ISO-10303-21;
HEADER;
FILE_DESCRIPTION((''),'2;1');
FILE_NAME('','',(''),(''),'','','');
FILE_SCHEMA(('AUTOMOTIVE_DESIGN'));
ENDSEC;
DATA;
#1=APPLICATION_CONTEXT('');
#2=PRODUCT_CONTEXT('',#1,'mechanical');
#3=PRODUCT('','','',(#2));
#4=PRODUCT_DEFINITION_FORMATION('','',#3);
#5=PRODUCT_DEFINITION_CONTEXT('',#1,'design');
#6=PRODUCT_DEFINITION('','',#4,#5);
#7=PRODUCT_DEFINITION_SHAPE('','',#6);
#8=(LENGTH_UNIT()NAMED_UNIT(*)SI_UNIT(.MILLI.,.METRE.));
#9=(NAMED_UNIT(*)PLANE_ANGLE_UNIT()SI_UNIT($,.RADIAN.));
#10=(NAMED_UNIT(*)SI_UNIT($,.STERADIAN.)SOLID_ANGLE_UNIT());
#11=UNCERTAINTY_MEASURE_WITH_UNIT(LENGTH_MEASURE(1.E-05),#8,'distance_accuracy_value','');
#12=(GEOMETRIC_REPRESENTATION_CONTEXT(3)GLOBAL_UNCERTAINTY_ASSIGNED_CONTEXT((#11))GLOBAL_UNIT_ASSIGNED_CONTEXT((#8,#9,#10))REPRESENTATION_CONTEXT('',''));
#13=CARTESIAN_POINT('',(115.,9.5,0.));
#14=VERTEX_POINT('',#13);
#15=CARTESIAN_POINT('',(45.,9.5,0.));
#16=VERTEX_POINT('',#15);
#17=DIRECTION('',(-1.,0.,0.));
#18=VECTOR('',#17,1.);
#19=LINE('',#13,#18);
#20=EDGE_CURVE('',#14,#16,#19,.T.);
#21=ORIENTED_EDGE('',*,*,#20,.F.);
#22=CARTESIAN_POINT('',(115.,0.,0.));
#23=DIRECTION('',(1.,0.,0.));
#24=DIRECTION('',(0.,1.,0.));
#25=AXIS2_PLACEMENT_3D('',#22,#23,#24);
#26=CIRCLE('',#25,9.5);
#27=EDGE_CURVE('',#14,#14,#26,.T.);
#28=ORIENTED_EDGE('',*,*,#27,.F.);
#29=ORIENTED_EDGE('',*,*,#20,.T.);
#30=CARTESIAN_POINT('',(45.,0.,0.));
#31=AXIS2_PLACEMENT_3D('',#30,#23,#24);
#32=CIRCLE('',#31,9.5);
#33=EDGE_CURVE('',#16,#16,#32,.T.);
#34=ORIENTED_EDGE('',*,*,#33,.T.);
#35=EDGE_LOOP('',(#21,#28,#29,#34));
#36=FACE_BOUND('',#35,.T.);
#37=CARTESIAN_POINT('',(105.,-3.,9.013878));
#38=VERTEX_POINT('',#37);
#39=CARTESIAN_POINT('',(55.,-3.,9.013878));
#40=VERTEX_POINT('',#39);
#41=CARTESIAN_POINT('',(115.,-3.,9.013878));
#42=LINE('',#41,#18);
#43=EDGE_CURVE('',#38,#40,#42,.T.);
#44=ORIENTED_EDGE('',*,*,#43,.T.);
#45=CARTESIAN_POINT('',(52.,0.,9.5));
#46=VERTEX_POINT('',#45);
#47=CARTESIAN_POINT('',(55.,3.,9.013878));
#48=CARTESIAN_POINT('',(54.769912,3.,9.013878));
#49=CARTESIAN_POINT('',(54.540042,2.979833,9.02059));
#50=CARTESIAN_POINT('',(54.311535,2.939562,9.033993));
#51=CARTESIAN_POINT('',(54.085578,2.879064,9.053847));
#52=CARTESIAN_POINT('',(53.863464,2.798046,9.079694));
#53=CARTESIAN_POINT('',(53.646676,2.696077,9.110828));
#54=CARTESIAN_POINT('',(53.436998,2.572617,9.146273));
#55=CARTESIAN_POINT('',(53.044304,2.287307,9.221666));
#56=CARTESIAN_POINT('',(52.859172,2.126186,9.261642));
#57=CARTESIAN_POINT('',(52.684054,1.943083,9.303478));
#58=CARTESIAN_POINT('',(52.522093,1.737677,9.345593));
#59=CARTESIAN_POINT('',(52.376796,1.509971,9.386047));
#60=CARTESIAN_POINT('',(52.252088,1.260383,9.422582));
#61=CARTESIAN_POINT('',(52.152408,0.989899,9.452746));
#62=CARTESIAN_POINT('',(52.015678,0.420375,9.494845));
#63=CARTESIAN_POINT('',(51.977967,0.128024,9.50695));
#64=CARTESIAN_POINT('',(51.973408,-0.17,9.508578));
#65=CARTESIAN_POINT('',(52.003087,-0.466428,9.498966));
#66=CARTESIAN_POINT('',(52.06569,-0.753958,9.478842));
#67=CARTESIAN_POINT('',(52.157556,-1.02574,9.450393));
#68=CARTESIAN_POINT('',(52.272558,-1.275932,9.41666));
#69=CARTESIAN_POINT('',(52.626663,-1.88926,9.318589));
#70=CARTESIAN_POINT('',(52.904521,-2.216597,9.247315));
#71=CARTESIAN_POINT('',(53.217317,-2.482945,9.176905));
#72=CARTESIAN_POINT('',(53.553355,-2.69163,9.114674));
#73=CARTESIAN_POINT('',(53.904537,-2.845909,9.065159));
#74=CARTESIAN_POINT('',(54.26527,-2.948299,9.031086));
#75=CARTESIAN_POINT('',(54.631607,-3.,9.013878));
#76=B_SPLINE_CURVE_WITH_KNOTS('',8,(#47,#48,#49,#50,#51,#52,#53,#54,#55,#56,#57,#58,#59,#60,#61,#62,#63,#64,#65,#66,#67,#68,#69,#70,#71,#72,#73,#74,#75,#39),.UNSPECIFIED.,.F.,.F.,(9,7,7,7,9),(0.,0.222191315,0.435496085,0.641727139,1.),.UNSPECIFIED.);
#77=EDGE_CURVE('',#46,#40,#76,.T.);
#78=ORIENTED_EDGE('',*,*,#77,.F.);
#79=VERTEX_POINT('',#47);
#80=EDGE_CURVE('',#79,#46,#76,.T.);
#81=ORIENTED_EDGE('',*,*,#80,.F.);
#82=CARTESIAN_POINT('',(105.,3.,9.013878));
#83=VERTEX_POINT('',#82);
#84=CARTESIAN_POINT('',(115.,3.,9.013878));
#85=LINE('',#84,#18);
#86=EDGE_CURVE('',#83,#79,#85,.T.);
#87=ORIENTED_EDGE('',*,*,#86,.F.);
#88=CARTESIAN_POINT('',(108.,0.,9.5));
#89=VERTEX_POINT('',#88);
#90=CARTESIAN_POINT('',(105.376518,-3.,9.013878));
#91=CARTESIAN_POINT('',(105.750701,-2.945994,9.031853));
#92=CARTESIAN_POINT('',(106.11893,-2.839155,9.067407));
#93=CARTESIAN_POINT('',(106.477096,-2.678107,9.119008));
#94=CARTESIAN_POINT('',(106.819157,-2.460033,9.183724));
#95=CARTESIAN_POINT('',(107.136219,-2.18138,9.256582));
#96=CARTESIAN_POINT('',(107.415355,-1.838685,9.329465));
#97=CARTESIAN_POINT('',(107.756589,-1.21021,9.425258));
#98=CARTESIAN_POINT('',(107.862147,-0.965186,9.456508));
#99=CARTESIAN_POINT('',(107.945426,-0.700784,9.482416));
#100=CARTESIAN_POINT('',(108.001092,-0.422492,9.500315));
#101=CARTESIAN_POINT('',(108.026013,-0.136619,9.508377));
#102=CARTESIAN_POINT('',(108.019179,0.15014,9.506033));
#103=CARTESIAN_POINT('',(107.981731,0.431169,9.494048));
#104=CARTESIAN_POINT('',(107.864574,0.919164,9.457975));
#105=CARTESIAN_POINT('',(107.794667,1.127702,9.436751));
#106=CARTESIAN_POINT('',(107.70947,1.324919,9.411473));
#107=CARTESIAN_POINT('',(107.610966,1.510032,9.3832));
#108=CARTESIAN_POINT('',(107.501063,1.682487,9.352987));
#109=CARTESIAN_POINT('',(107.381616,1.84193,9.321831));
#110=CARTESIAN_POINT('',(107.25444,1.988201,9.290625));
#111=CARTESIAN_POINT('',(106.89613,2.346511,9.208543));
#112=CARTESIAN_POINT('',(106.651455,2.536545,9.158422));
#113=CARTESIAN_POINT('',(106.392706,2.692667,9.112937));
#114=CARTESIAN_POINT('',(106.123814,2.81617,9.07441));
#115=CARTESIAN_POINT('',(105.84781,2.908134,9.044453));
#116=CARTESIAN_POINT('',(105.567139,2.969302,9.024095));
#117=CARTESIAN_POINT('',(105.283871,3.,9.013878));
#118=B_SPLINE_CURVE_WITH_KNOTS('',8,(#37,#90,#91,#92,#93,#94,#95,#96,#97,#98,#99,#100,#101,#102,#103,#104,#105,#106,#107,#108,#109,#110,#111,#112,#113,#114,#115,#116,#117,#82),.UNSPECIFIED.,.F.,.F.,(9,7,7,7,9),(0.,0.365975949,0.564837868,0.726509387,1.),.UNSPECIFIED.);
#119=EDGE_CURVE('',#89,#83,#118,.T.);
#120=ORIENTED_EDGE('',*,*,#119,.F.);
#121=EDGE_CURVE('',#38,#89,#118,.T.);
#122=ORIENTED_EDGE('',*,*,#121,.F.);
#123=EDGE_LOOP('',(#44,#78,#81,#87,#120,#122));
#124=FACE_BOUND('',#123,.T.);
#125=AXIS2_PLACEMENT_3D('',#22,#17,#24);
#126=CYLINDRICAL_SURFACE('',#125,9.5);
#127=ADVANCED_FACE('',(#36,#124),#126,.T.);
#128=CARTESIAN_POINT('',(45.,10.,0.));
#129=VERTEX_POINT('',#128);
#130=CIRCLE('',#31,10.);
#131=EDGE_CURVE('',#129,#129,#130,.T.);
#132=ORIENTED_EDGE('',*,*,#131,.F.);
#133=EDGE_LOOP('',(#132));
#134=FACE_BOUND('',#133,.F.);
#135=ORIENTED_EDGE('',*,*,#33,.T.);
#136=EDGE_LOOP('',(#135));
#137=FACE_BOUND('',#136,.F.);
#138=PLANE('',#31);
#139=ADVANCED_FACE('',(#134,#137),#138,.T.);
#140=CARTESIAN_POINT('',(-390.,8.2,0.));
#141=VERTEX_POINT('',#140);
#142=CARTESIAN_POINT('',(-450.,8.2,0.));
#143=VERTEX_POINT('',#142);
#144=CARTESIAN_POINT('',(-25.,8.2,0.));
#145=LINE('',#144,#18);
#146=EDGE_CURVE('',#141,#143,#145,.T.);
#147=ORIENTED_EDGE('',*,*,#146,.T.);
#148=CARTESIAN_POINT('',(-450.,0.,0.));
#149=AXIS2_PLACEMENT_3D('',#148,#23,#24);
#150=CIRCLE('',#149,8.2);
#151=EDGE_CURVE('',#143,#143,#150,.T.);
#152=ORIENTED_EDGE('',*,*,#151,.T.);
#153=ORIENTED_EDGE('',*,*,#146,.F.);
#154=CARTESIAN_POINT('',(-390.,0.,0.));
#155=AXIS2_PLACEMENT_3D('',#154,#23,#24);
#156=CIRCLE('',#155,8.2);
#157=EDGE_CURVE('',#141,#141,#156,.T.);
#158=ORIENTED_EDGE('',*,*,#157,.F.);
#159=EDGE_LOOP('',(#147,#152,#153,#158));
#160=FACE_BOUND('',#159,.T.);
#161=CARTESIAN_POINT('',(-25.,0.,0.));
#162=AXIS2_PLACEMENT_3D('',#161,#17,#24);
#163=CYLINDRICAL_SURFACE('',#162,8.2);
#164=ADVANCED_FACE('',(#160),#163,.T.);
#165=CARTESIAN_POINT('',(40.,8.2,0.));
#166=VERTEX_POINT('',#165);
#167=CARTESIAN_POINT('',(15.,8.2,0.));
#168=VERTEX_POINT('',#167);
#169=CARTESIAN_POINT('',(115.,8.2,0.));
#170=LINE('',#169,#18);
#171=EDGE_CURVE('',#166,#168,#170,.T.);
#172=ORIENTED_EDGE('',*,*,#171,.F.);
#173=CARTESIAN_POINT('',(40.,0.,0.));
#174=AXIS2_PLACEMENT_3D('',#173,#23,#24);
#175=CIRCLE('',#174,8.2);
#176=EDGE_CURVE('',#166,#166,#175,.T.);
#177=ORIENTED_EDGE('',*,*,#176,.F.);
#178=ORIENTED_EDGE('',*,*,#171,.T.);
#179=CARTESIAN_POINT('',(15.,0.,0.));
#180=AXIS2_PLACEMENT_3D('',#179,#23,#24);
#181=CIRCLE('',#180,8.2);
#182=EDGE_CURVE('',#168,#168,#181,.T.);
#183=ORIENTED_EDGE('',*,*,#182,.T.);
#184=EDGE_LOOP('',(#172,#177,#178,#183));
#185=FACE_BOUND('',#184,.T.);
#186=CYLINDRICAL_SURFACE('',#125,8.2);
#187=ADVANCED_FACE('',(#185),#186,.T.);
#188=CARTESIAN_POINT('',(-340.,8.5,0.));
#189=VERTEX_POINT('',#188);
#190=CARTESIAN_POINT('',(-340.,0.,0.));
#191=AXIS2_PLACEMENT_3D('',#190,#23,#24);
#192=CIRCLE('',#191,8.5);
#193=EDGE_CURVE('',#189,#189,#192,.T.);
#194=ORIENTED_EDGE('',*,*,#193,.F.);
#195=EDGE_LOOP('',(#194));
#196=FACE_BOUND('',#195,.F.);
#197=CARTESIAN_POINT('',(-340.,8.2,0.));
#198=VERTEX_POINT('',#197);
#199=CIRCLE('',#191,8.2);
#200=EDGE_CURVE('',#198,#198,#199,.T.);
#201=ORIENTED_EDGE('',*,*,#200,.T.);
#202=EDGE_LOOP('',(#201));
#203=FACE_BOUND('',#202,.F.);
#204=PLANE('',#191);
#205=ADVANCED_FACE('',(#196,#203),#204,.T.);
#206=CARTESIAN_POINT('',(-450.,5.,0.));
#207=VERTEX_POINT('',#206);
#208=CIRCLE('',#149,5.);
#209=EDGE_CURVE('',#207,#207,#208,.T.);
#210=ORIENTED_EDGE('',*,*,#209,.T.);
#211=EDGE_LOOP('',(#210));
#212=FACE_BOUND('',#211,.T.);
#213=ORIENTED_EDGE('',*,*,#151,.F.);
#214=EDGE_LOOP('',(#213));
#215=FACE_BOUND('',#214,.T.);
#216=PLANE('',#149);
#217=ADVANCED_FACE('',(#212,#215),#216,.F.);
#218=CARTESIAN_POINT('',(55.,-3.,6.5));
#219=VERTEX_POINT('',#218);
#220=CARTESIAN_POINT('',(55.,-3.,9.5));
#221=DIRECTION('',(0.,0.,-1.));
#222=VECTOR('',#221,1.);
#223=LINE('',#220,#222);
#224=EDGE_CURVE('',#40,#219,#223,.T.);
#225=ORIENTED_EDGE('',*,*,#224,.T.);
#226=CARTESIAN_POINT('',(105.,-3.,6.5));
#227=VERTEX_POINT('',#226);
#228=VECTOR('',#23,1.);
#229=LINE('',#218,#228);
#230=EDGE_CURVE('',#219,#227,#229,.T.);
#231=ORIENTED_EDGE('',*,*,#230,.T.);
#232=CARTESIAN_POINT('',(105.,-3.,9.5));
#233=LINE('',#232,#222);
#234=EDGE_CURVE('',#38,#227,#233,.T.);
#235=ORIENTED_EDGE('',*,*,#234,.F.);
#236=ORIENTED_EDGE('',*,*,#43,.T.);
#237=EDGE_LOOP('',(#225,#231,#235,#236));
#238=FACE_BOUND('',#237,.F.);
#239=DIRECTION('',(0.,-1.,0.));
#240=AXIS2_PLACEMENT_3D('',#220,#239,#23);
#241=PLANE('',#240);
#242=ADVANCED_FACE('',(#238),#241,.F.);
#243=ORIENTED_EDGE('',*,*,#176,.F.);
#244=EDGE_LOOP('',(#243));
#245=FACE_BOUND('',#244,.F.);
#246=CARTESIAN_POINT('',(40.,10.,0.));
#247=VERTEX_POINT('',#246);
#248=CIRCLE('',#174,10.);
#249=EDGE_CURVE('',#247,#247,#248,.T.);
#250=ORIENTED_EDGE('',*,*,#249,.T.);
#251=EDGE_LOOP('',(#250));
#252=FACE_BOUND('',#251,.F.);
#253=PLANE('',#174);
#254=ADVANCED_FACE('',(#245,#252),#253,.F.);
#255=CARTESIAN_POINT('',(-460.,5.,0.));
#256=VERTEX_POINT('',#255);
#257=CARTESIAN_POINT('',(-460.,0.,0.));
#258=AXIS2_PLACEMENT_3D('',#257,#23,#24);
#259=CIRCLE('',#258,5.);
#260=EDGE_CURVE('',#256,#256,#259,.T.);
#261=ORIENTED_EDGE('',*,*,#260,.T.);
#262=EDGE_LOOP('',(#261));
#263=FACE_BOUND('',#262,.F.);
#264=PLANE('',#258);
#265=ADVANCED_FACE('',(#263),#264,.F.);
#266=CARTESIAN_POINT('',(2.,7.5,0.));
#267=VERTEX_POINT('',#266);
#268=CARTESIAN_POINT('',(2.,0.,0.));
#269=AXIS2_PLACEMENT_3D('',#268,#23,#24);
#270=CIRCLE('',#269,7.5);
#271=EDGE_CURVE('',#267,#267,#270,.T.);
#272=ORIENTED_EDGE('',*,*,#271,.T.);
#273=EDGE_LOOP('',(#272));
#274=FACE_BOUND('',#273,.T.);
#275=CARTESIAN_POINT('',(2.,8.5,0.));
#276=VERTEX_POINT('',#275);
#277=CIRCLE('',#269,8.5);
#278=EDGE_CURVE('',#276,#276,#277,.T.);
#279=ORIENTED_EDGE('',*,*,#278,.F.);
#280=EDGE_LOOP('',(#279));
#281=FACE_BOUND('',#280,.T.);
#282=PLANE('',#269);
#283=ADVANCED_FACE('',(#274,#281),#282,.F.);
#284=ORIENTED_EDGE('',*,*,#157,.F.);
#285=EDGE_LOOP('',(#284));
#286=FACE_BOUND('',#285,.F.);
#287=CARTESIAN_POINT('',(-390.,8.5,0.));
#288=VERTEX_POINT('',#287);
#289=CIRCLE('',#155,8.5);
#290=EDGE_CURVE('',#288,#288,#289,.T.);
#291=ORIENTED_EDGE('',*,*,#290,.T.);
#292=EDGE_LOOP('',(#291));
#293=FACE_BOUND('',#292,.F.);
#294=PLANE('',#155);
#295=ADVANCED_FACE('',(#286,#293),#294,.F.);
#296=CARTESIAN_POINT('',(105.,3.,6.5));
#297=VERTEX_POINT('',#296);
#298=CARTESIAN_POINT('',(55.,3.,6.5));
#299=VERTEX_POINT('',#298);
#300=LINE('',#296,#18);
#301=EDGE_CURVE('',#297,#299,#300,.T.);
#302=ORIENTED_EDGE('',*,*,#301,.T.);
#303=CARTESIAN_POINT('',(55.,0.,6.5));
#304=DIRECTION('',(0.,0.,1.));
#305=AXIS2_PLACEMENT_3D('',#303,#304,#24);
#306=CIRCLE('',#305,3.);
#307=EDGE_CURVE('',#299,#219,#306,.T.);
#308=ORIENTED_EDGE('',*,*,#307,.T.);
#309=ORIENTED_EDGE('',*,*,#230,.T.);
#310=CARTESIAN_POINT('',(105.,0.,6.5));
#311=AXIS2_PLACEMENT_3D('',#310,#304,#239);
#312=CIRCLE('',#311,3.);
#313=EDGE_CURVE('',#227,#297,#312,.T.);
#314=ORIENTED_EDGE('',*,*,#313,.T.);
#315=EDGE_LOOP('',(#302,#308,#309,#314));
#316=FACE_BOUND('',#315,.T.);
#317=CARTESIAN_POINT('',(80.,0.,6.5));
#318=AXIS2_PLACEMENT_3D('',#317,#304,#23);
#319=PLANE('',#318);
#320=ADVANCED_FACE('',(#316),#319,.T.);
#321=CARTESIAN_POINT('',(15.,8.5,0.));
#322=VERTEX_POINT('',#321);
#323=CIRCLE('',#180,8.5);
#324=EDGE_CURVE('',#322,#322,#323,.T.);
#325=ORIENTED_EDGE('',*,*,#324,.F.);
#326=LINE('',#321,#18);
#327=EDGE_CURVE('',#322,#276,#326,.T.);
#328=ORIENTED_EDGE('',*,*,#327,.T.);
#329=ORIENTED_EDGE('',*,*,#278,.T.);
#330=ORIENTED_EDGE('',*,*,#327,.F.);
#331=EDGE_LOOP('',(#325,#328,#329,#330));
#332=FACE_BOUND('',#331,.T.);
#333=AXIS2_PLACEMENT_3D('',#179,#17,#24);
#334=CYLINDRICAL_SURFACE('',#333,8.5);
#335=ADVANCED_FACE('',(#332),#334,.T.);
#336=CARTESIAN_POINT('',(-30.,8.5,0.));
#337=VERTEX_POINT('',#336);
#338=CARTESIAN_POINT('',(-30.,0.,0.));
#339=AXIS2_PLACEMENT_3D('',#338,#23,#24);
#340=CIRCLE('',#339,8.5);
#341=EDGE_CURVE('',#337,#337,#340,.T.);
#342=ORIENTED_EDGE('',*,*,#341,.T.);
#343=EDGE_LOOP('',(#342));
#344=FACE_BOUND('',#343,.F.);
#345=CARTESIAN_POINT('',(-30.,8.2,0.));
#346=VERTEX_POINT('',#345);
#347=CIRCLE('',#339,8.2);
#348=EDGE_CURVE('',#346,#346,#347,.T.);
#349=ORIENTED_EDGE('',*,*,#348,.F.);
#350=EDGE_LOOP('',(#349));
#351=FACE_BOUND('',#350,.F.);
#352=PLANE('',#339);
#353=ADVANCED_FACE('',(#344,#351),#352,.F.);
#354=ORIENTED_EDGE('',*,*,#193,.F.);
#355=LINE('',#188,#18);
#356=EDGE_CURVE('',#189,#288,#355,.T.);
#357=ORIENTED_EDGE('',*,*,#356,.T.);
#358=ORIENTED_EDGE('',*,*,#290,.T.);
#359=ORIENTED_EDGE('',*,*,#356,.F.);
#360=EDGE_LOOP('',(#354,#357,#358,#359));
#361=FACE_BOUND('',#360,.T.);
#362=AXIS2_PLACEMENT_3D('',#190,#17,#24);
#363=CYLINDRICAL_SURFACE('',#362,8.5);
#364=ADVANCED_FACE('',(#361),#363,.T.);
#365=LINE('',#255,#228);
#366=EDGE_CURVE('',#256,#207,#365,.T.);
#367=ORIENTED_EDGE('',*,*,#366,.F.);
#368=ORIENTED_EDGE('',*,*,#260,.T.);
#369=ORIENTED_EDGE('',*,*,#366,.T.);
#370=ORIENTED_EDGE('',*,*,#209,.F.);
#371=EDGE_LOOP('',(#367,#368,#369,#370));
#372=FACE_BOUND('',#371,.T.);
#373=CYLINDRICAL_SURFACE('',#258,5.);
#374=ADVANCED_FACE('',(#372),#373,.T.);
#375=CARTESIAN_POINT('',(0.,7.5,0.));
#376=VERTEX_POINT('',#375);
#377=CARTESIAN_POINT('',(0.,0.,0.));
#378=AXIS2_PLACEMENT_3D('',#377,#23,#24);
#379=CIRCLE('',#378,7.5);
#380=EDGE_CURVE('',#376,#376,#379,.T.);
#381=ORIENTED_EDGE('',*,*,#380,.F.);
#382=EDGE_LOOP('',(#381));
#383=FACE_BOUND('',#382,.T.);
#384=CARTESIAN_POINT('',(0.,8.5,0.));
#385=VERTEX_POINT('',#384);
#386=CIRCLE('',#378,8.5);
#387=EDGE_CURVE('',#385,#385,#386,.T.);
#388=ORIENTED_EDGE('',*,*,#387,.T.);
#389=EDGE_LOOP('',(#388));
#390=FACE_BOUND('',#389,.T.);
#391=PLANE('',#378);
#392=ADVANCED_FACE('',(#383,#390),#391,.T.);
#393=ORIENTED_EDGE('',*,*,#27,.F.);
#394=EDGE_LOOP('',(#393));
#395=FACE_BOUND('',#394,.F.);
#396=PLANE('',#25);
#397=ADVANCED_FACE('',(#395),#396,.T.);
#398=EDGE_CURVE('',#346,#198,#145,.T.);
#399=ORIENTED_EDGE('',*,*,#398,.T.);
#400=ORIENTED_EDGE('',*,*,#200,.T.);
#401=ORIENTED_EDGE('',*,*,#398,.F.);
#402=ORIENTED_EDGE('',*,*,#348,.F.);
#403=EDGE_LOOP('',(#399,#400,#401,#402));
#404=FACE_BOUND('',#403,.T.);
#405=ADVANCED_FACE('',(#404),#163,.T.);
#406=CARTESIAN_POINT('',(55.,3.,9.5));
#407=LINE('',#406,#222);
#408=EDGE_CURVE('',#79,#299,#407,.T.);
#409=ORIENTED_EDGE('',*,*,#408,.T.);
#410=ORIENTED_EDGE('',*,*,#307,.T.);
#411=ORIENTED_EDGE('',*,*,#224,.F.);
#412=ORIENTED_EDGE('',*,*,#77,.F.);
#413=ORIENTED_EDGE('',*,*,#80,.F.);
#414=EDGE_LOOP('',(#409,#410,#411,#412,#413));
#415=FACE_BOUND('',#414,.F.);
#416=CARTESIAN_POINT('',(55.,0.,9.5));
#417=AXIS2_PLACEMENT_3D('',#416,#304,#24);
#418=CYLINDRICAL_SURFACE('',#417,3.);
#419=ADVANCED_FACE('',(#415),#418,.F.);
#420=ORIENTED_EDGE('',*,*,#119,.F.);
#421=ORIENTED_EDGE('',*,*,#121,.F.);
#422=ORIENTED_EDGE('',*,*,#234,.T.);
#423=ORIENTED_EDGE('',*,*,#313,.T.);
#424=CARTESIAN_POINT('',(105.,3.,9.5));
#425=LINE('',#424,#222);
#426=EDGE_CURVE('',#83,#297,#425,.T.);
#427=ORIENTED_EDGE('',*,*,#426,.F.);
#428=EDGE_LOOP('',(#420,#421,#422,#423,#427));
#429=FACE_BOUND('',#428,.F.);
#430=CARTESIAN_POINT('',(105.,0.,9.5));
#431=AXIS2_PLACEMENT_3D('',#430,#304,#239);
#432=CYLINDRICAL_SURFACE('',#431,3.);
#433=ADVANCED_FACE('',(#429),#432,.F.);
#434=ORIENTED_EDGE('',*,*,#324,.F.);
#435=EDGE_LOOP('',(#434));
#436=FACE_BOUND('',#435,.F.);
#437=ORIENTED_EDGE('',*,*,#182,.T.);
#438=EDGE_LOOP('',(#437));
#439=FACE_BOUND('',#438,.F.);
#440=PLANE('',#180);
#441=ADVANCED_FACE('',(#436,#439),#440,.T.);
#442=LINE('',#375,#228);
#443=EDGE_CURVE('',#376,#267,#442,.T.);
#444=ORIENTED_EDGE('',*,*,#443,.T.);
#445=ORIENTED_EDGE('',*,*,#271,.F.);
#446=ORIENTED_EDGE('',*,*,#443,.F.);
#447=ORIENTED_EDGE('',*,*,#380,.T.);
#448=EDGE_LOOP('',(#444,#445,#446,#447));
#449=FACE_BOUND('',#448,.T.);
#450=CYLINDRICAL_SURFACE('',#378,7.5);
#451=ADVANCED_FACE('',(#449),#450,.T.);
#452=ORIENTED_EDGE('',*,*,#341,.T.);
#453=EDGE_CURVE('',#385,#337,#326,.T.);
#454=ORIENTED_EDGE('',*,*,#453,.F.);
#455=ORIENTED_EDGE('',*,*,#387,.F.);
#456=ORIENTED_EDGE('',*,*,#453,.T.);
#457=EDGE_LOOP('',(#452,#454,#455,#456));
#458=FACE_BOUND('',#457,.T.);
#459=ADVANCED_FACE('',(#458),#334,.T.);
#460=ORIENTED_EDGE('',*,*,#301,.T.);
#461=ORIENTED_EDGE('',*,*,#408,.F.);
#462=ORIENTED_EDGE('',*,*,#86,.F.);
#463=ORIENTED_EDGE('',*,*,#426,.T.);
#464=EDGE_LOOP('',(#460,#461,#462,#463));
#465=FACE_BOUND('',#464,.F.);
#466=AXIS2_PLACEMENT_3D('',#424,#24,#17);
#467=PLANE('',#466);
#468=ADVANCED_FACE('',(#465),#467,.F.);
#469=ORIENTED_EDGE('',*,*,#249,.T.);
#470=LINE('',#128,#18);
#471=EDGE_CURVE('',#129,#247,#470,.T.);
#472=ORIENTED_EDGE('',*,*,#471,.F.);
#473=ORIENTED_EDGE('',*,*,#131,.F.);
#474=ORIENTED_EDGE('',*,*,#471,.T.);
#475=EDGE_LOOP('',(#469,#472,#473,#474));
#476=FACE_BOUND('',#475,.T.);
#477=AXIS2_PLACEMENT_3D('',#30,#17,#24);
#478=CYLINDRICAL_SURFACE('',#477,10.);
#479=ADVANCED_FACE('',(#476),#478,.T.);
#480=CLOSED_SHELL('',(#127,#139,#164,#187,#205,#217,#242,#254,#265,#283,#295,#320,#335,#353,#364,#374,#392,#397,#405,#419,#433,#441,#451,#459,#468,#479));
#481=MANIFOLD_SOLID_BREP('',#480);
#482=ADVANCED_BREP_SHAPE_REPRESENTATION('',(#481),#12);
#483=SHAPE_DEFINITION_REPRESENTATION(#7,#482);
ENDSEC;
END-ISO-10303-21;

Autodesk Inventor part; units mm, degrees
ref_plane "YZ Plane" through (0, 0, 0) normal (1, 0, 0) x (0, 1, 0)
ref_plane "XZ Plane" through (0, 0, 0) normal (0, 1, 0) x (-1, 0, 0)
sketch "Sketch1" plane through (0, 0, 0) normal (0, 0, 1) x (1, 0, 0)
  line L0 (0, 0) -> (115, 0)
  line L1 (115, 0) -> (115, 8.2)
  line L2 (115, 8.2) -> (-25, 8.2)
  line L3 (-25, 8.2) -> (-460, 8.2)
  line L4 (-460, 8.2) -> (-460, 0)
  line L5 (-460, 0) -> (0, 0)
  line L6 (-340, 8.2) -> (-340, 8.5)
  line L7 (-340, 8.5) -> (-390, 8.5)
  line L8 (-390, 8.5) -> (-390, 8.2)
  line L9 (15, 8.2) -> (15, 8.5)
  line L10 (15, 8.5) -> (-30, 8.5)
  line L11 (-30, 8.5) -> (-30, 8.2)
  line L12 (115, 8.2) -> (115, 9.5)
  line L13 (115, 9.5) -> (45, 9.5)
  line L14 (45, 9.5) -> (45, 8.2)
  line L15 (45, 9.5) -> (45, 10)
  line L16 (45, 10) -> (40, 10)
  line L17 (40, 10) -> (40, 8.2)
  line L18 (0, 8.5) -> (0, 7.5)
  line L19 (0, 7.5) -> (2, 7.5)
  line L20 (2, 7.5) -> (2, 8.5)
  line L21 (-460, 5) -> (-450, 5)
  line L22 (-450, 5) -> (-450, 8.2)
  dimension "d0" = 16.4
  dimension "d3" = 17
  dimension "d5" = 50
  dimension "d6" = 460
  dimension "d7" = 45
  dimension "d9" = 17
  dimension "d10" = 115
  dimension "d11" = 19
  dimension "d12" = 20
  dimension "d13" = 5
  dimension "d14" = 70
  dimension "d16" = 15
  dimension "d17" = 2
  dimension "d18" = 15
  dimension "d19" = 340
  dimension "d25" = 10
  dimension "d26" = 10
revolve "Revolution1" add sketch "Sketch1" angle 360 about axis through (0, 0, 0) along (1, 0, 0) contours L5 L4 L21 L22 L3 L2 L18 L19 L20 L1 L0 | L2 L14 L13 L12 | L2 L17 L16 L15 L14 | L2 L20 L10 L9 | L8 L7 L6 L3 | L2 L3 L11 L10 L18
ref_plane "Work Plane1" through (80, 0, 9.5) normal (0, 0, 1) x (1, 0, 0)
sketch "Sketch2" plane through (80, 0, 9.5) normal (0, 0, 1) x (1, 0, 0)
  line L0 (35, -9.5) -> (35, 9.5) projected
  line L1 (25, 0) -> (-25, 0) construction
  line L2 (25, 3) -> (-25, 3)
  line L3 (-25, -3) -> (25, -3)
  arc A0 (25, -3) -> (25, 3) centre (25, 0) ccw
  arc A1 (-25, 3) -> (-25, -3) centre (-25, 0) ccw
  point P0 (-80, 0)
  point P1 (0, 0)
  point P2 (35, 0)
  dimension "d20" = 6
  dimension "d21" = 50
  dimension "d22" = 35
extrude "Extrusion1" cut sketch "Sketch2" against normal blind 3
properties part number "shaft 2"
